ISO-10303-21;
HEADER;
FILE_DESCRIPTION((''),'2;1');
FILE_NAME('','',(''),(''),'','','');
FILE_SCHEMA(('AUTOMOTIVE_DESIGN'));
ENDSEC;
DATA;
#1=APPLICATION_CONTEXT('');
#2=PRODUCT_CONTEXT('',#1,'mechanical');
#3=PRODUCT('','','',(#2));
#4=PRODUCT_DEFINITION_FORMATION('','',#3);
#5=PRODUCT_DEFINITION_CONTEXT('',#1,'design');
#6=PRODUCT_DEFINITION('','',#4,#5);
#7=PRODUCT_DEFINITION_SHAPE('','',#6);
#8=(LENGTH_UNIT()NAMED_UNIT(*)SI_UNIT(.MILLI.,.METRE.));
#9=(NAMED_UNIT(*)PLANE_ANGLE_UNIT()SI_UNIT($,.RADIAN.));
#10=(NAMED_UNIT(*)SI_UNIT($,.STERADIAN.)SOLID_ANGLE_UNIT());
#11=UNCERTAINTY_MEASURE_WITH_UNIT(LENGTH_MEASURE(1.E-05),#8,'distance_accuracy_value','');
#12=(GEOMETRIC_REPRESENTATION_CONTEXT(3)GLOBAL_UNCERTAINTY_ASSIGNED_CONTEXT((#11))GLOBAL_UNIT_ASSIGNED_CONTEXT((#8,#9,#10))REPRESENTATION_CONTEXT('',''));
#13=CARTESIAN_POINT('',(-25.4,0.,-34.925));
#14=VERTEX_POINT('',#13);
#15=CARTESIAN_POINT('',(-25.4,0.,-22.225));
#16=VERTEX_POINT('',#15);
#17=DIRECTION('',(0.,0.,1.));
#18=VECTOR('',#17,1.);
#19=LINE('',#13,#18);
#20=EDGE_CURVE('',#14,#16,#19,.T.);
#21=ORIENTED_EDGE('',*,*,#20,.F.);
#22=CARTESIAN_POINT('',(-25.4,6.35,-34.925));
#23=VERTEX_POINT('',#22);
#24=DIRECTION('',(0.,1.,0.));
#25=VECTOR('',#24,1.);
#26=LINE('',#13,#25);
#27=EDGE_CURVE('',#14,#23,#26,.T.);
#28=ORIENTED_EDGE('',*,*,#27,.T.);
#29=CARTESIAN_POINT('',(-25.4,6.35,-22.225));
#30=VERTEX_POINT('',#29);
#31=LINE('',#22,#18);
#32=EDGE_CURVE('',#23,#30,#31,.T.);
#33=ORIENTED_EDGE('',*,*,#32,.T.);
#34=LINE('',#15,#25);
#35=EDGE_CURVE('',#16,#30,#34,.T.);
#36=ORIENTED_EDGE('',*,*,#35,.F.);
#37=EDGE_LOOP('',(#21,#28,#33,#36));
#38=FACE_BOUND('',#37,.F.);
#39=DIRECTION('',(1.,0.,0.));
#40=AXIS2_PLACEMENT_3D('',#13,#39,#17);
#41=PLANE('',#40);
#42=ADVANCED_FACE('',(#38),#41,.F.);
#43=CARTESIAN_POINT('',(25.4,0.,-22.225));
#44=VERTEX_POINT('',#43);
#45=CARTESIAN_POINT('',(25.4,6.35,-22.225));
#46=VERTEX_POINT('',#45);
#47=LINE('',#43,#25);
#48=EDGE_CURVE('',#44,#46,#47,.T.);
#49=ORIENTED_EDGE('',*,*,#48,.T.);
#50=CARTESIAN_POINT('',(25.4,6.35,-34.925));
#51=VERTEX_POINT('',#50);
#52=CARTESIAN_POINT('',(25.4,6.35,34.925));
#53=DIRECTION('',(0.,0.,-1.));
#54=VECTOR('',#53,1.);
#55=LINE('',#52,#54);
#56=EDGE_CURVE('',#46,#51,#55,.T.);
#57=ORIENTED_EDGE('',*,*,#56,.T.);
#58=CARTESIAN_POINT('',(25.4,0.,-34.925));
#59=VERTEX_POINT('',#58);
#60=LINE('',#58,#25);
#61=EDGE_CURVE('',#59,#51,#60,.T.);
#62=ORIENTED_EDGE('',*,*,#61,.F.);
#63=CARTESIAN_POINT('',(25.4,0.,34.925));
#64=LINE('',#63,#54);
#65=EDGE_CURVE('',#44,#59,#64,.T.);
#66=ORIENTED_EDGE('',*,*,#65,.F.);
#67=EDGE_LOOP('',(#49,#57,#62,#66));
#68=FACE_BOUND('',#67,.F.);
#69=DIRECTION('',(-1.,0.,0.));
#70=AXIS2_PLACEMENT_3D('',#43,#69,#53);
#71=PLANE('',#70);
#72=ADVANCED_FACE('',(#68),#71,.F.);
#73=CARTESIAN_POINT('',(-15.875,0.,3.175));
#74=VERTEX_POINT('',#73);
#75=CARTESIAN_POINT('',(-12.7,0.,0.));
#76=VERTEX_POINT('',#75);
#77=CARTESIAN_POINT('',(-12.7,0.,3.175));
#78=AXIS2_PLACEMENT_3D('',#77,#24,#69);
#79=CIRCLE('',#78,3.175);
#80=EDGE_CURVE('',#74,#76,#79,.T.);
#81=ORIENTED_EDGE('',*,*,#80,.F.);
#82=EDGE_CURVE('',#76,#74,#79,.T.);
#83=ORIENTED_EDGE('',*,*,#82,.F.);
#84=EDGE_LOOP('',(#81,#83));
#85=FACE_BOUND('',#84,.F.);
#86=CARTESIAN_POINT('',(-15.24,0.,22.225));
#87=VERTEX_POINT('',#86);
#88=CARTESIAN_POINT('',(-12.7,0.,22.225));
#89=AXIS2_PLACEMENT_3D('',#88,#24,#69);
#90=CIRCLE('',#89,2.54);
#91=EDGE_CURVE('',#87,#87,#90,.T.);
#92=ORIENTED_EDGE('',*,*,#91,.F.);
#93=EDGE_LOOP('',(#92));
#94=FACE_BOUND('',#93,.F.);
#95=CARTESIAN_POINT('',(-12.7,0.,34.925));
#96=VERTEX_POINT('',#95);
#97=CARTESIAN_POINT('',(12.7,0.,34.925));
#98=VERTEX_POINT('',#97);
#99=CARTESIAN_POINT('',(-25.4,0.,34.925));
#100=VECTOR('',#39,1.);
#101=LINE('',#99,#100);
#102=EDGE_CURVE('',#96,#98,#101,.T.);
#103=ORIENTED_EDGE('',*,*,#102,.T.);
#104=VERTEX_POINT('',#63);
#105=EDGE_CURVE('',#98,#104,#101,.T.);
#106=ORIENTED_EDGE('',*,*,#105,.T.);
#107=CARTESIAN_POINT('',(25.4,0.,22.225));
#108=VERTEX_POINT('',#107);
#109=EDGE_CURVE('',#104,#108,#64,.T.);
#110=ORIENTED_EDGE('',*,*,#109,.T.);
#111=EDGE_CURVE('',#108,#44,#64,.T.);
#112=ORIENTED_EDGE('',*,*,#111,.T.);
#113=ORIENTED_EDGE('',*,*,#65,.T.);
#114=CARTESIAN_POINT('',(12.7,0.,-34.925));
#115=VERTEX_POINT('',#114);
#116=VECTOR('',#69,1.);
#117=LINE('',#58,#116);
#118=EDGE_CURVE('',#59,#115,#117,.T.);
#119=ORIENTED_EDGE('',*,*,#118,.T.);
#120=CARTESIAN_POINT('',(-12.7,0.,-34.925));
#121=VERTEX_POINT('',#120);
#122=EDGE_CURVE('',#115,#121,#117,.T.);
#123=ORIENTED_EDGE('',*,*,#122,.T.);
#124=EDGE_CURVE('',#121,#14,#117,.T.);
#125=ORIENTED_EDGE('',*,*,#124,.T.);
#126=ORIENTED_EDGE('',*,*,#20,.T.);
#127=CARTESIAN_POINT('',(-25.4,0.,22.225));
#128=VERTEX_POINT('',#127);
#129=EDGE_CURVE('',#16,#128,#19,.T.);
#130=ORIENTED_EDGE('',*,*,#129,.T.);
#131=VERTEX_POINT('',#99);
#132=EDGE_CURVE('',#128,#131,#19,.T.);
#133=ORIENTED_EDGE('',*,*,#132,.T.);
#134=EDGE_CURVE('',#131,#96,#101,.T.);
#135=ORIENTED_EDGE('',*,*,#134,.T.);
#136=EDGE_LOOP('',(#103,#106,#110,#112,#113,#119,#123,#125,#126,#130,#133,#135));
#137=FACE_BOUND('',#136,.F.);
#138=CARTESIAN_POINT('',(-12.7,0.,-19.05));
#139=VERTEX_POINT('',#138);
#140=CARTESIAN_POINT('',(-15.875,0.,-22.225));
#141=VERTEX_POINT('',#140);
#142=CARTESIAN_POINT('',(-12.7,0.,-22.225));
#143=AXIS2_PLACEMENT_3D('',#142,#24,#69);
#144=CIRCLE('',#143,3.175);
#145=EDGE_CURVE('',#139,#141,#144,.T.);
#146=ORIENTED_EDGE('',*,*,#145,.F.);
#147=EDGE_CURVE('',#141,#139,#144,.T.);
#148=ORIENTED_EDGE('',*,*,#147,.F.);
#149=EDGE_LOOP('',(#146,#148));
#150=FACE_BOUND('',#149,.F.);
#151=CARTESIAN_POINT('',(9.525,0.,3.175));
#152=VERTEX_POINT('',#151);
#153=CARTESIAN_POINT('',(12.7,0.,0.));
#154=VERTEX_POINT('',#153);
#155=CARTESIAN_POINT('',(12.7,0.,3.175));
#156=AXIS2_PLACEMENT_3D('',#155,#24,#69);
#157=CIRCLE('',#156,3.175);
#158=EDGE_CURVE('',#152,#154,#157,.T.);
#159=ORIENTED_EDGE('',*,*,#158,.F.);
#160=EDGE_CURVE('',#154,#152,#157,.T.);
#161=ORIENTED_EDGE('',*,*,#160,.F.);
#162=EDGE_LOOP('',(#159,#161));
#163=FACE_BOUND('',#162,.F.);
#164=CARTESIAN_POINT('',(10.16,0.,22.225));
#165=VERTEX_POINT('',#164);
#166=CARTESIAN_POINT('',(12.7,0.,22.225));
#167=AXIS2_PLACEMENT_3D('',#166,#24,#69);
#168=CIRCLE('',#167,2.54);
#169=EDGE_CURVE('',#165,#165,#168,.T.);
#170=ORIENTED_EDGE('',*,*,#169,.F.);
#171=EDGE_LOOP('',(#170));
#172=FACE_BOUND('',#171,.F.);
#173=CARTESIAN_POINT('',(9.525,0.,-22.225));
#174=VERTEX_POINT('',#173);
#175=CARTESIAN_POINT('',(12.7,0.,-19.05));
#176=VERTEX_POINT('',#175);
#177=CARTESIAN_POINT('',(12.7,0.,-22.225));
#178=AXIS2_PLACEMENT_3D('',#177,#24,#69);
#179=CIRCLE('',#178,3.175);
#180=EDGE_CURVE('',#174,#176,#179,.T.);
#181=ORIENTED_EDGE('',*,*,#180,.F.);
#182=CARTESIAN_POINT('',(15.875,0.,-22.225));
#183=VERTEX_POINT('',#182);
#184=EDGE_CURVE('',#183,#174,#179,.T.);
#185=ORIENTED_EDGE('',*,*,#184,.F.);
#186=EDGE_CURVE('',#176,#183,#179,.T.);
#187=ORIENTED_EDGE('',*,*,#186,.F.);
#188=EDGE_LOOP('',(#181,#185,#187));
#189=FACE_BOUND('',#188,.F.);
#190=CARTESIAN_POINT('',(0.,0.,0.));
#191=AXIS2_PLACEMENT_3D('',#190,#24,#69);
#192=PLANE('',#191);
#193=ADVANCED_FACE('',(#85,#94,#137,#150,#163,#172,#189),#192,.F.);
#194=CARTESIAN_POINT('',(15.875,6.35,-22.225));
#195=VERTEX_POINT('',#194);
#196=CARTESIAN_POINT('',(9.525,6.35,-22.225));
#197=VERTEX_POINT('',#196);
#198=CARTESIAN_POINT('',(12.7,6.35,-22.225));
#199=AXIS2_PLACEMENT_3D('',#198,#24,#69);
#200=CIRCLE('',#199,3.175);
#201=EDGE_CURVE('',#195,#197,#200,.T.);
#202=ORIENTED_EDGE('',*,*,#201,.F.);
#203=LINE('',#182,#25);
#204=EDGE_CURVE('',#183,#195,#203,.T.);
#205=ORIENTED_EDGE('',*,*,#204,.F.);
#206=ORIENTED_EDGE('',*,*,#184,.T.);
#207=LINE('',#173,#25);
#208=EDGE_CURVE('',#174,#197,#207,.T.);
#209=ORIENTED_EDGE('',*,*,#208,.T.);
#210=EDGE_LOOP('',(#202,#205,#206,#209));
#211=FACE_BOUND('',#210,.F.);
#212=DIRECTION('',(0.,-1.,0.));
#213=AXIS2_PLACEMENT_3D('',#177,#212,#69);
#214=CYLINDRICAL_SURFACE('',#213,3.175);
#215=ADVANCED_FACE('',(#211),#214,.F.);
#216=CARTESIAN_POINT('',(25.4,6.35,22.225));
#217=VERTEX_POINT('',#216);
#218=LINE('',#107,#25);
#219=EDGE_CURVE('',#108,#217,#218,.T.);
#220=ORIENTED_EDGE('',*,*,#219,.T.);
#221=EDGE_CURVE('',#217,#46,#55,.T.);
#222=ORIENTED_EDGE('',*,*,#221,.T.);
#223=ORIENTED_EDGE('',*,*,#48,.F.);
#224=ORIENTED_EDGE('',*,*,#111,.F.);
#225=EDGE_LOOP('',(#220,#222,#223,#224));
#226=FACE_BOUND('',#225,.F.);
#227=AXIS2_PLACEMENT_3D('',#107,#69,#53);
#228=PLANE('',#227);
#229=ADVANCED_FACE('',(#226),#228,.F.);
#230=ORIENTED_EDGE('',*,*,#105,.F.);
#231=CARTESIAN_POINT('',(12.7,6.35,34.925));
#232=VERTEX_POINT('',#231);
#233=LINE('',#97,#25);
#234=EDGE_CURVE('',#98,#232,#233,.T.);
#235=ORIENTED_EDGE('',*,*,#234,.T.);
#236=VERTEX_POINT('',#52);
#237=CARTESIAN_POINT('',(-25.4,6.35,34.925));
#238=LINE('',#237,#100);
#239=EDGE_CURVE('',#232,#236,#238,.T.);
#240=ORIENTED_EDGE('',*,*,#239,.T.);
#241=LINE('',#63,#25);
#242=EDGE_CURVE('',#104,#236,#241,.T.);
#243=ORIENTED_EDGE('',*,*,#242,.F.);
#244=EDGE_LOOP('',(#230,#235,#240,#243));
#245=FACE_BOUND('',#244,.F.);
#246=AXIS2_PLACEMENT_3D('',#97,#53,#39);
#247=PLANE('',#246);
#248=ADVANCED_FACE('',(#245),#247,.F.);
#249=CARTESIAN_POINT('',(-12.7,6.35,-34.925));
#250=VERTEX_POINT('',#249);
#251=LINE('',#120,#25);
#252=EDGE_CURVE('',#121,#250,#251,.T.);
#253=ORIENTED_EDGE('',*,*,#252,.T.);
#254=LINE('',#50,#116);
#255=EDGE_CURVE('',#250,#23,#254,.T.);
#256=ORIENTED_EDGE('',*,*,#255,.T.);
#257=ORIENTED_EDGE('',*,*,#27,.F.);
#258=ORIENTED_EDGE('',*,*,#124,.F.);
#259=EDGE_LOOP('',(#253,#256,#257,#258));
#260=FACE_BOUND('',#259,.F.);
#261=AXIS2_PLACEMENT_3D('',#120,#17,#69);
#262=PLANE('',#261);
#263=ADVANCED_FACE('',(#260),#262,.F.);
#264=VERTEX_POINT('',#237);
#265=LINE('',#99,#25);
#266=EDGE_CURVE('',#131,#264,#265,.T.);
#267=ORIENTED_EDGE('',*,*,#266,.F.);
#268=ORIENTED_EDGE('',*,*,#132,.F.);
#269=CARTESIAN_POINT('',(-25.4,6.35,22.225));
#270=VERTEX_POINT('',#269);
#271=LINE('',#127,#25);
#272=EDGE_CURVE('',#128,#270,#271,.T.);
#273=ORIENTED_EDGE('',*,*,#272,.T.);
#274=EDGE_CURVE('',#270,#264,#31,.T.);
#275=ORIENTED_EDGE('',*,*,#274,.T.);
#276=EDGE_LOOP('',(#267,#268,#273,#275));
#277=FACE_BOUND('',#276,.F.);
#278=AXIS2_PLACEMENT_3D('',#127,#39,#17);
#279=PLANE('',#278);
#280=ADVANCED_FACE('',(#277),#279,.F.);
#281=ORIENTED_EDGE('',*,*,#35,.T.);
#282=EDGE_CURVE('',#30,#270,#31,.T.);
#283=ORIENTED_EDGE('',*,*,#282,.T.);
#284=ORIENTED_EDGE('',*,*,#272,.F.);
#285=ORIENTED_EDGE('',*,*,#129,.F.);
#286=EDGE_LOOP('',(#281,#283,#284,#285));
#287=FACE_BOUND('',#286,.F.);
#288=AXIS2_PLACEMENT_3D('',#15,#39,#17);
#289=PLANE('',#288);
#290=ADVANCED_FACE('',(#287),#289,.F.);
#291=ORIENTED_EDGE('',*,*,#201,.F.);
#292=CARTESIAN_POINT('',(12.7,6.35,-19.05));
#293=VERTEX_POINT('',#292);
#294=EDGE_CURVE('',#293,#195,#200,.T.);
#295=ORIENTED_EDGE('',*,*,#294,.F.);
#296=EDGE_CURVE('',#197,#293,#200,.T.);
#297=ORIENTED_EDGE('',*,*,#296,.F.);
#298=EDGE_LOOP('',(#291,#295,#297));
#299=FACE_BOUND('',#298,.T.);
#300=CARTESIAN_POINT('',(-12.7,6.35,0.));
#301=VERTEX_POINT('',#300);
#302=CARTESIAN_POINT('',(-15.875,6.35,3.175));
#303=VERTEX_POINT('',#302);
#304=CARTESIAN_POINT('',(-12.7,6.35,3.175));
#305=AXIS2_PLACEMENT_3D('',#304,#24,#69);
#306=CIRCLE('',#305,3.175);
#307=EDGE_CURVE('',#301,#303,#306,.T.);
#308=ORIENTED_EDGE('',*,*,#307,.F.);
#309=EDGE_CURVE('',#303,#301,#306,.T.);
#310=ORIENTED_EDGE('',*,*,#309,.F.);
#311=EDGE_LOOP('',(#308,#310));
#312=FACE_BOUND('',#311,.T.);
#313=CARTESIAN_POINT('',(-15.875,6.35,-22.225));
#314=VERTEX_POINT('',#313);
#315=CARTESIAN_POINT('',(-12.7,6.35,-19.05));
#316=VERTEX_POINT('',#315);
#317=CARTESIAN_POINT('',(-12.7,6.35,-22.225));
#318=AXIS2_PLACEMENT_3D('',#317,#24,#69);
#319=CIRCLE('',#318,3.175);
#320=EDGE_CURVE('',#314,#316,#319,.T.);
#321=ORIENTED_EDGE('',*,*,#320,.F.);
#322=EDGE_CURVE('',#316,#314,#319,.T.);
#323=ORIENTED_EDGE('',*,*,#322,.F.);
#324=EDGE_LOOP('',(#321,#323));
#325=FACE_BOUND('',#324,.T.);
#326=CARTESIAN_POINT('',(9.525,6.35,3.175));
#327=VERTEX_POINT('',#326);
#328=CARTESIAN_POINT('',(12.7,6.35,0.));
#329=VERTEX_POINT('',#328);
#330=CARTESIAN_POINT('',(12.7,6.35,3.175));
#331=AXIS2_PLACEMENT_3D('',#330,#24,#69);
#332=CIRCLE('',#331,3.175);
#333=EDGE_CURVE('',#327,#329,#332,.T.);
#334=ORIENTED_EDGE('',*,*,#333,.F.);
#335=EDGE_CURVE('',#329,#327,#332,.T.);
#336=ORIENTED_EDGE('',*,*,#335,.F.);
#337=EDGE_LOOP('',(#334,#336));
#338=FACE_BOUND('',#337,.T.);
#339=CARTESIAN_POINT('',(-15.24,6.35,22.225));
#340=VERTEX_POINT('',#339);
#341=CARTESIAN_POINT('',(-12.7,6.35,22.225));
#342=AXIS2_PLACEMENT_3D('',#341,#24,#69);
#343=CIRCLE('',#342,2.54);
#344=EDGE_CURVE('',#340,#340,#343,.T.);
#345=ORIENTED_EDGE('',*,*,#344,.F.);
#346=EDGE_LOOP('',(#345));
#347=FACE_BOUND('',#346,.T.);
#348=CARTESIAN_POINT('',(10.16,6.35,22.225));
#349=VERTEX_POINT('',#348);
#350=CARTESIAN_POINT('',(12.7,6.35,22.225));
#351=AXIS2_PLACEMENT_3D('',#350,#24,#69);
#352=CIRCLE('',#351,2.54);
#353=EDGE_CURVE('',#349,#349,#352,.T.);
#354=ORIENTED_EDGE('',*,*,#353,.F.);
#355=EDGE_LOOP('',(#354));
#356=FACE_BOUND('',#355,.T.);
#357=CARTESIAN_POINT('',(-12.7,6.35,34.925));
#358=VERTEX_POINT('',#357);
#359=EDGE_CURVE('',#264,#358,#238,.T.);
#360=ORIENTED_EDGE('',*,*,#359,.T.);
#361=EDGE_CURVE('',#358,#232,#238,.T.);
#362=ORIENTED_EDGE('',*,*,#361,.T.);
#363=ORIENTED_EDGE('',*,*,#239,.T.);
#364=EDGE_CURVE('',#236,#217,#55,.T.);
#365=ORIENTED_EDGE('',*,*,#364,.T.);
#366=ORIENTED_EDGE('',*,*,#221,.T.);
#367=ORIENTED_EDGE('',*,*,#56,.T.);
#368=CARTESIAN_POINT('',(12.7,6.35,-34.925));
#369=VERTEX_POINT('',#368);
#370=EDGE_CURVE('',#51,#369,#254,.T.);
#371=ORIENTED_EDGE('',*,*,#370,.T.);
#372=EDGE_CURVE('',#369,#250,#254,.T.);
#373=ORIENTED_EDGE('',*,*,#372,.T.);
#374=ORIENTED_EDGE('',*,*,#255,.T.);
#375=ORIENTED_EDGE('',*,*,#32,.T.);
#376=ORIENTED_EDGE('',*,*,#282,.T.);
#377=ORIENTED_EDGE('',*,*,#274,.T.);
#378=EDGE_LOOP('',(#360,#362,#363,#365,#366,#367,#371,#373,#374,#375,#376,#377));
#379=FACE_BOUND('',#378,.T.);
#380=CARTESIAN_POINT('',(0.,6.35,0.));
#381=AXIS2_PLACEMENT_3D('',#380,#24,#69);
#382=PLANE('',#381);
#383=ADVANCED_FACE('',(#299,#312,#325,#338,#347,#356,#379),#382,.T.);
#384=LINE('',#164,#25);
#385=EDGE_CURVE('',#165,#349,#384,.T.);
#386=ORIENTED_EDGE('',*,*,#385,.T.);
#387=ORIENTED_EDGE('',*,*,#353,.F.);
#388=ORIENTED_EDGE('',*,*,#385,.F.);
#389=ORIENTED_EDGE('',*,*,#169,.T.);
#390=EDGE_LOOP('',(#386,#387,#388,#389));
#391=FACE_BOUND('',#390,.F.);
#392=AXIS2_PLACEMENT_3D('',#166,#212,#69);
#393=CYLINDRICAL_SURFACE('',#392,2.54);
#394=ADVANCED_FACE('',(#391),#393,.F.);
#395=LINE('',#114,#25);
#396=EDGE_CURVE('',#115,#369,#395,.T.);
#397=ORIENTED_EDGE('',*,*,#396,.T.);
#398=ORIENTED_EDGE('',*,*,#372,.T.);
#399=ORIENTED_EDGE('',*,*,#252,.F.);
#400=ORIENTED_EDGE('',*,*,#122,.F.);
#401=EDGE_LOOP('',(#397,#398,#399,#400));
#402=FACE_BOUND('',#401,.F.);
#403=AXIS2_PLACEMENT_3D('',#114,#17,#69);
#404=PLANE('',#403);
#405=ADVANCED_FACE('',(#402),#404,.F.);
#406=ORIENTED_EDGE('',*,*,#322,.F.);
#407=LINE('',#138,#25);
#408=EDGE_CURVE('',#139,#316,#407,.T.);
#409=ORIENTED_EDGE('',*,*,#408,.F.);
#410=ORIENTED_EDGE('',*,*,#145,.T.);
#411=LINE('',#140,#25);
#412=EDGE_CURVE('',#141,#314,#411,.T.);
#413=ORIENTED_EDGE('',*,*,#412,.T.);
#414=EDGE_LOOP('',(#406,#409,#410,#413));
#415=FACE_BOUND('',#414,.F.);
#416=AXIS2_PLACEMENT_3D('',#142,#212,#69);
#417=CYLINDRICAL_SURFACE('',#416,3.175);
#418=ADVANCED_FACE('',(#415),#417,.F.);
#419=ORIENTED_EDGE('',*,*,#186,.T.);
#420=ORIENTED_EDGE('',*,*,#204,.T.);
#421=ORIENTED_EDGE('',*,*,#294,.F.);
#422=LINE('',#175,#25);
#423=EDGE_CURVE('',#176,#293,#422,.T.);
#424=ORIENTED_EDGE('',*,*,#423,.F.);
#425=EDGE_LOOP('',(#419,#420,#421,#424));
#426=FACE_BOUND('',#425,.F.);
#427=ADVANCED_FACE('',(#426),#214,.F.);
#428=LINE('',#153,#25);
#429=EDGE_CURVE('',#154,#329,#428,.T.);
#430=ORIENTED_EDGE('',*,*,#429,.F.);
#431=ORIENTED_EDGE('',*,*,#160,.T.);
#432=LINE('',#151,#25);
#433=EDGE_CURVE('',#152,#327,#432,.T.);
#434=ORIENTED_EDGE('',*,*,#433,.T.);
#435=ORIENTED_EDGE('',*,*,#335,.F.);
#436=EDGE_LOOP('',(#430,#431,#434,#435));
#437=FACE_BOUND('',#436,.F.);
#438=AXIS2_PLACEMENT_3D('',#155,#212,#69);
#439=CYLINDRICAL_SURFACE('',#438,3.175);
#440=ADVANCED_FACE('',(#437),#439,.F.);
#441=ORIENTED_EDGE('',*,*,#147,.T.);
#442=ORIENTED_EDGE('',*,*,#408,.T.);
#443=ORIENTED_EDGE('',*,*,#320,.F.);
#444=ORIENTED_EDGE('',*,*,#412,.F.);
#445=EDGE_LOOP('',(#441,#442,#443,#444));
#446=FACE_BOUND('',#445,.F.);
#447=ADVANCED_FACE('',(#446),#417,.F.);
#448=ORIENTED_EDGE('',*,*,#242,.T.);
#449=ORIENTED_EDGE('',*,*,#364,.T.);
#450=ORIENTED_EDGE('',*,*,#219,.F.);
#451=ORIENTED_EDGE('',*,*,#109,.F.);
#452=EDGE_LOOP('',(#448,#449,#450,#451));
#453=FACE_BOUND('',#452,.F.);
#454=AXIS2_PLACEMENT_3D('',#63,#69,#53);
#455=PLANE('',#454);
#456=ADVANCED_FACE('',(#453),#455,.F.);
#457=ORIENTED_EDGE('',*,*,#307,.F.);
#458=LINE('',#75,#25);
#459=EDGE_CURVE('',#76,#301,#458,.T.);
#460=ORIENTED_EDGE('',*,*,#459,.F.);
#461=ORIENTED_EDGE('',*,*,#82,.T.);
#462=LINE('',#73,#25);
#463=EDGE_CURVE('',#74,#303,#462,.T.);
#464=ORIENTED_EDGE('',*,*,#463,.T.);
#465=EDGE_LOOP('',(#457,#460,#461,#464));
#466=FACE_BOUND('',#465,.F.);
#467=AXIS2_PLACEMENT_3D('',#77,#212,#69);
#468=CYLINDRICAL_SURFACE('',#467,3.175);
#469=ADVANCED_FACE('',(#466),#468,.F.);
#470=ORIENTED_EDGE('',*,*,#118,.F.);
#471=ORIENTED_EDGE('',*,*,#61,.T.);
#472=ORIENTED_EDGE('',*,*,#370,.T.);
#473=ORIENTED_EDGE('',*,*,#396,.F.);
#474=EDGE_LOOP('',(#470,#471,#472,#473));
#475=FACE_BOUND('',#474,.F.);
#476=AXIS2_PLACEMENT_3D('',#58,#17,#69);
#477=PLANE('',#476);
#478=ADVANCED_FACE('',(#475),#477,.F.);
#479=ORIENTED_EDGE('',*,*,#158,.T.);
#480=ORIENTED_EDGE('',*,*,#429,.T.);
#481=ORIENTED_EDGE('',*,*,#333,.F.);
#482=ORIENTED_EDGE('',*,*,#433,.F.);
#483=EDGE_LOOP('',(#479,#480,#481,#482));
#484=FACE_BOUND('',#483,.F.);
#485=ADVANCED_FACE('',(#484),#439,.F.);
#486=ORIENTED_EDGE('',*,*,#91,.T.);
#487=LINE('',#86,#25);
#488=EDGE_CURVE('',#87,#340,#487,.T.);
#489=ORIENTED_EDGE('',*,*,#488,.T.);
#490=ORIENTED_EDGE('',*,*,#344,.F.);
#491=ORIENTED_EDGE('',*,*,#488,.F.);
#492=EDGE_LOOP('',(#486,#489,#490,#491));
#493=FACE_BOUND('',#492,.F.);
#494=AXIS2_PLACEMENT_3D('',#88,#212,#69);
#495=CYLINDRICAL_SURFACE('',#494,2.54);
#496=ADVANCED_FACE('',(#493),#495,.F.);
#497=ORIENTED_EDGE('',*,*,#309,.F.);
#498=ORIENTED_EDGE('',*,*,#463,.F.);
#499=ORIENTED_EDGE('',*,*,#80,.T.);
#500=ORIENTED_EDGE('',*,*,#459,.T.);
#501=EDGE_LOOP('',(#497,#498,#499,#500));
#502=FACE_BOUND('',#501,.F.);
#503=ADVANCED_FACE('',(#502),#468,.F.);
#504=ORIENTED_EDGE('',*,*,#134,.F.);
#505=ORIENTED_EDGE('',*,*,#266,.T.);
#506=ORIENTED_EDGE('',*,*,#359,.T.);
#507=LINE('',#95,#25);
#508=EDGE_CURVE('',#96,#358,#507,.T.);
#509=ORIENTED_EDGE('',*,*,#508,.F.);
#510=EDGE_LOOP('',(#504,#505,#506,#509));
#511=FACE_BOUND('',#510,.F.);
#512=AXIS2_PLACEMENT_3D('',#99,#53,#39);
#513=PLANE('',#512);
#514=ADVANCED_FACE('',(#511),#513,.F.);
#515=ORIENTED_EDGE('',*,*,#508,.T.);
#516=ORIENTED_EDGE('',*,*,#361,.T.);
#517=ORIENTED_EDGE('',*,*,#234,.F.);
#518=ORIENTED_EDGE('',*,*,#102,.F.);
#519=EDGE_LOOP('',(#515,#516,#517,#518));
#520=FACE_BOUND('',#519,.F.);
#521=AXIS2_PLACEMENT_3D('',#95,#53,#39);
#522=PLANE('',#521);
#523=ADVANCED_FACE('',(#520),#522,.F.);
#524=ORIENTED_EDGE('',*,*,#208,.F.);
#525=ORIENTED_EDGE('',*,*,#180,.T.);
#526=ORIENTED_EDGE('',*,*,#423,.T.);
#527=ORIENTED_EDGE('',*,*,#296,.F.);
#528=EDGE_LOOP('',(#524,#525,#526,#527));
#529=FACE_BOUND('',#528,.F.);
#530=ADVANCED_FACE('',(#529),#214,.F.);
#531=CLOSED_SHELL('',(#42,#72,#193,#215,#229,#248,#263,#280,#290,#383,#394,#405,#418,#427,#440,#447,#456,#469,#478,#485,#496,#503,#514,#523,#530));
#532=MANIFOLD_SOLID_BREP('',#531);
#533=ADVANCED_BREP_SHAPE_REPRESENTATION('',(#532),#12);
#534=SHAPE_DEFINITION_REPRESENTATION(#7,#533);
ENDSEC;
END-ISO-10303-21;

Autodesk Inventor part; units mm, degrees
ref_plane "YZ Plane" through (0, 0, 0) normal (1, 0, 0) x (0, 1, 0)
ref_plane "XZ Plane" through (0, 0, 0) normal (0, 1, 0) x (-1, 0, 0)
ref_plane "XY Plane" through (0, 0, 0) normal (0, 0, 1) x (1, 0, 0)
sketch "Sketch1" plane through (0, 0, 0) normal (0, 1, 0) x (-1, 0, 0)
  line L0 (25.4, 34.925) -> (-25.4, 34.925)
  line L1 (-25.4, 34.925) -> (-25.4, -34.925)
  line L2 (-25.4, -34.925) -> (25.4, -34.925)
  line L3 (25.4, -34.925) -> (25.4, 34.925)
  line L4 (25.4, 34.925) -> (-25.4, -34.925) construction
  line L5 (-25.4, 34.925) -> (25.4, -34.925) construction
  line L6 (25.4, -34.925) -> (12.7, -34.925)
  line L7 (25.4, -22.225) -> (25.4, -34.925)
  line L8 (-25.4, -34.925) -> (-12.7, -34.925)
  line L9 (-12.7, -22.225) -> (-25.4, -22.225)
  line L10 (-25.4, -22.225) -> (-25.4, -34.925)
  line L11 (12.7, -22.225) -> (12.7, 3.175)
  line L12 (12.7, -22.225) -> (38.1, -22.225) construction
  line L13 (-12.7, -22.225) -> (-12.7, 3.175)
  line L14 (25.4, 34.925) -> (12.7, 34.925)
  line L15 (25.4, 22.225) -> (25.4, 34.925)
  line L16 (-25.4, 34.925) -> (-12.7, 34.925)
  line L17 (-25.4, 22.225) -> (-25.4, 34.925)
  circle A0 centre (12.7, 22.225) radius 2.54
  circle A1 centre (-12.7, 22.225) radius 2.54
  circle A2 centre (12.7, -22.225) radius 3.175
  circle A3 centre (-12.7, -22.225) radius 3.175
  circle A4 centre (12.7, 3.175) radius 3.175
  circle A5 centre (-12.7, 3.175) radius 3.175
  point P0 (0, 0)
  dimension "d0" = 50.8
  dimension "d1" = 69.85
  dimension "d2" = 12.7
  dimension "d3" = 12.7
  dimension "d4" = 12.7
  dimension "d5" = 12.7
  dimension "d6" = 25.4
  dimension "d7" = 90
  dimension "d8" = 25.4
  dimension "d13" = 5.08
  dimension "d14" = 5.08
  dimension "d15" = 6.35
  dimension "d16" = 6.35
  dimension "d17" = 6.35
  dimension "d18" = 6.35
extrude "Extrusion1" add sketch "Sketch1" along normal blind 6.35
properties part number "CatapultPlate"
